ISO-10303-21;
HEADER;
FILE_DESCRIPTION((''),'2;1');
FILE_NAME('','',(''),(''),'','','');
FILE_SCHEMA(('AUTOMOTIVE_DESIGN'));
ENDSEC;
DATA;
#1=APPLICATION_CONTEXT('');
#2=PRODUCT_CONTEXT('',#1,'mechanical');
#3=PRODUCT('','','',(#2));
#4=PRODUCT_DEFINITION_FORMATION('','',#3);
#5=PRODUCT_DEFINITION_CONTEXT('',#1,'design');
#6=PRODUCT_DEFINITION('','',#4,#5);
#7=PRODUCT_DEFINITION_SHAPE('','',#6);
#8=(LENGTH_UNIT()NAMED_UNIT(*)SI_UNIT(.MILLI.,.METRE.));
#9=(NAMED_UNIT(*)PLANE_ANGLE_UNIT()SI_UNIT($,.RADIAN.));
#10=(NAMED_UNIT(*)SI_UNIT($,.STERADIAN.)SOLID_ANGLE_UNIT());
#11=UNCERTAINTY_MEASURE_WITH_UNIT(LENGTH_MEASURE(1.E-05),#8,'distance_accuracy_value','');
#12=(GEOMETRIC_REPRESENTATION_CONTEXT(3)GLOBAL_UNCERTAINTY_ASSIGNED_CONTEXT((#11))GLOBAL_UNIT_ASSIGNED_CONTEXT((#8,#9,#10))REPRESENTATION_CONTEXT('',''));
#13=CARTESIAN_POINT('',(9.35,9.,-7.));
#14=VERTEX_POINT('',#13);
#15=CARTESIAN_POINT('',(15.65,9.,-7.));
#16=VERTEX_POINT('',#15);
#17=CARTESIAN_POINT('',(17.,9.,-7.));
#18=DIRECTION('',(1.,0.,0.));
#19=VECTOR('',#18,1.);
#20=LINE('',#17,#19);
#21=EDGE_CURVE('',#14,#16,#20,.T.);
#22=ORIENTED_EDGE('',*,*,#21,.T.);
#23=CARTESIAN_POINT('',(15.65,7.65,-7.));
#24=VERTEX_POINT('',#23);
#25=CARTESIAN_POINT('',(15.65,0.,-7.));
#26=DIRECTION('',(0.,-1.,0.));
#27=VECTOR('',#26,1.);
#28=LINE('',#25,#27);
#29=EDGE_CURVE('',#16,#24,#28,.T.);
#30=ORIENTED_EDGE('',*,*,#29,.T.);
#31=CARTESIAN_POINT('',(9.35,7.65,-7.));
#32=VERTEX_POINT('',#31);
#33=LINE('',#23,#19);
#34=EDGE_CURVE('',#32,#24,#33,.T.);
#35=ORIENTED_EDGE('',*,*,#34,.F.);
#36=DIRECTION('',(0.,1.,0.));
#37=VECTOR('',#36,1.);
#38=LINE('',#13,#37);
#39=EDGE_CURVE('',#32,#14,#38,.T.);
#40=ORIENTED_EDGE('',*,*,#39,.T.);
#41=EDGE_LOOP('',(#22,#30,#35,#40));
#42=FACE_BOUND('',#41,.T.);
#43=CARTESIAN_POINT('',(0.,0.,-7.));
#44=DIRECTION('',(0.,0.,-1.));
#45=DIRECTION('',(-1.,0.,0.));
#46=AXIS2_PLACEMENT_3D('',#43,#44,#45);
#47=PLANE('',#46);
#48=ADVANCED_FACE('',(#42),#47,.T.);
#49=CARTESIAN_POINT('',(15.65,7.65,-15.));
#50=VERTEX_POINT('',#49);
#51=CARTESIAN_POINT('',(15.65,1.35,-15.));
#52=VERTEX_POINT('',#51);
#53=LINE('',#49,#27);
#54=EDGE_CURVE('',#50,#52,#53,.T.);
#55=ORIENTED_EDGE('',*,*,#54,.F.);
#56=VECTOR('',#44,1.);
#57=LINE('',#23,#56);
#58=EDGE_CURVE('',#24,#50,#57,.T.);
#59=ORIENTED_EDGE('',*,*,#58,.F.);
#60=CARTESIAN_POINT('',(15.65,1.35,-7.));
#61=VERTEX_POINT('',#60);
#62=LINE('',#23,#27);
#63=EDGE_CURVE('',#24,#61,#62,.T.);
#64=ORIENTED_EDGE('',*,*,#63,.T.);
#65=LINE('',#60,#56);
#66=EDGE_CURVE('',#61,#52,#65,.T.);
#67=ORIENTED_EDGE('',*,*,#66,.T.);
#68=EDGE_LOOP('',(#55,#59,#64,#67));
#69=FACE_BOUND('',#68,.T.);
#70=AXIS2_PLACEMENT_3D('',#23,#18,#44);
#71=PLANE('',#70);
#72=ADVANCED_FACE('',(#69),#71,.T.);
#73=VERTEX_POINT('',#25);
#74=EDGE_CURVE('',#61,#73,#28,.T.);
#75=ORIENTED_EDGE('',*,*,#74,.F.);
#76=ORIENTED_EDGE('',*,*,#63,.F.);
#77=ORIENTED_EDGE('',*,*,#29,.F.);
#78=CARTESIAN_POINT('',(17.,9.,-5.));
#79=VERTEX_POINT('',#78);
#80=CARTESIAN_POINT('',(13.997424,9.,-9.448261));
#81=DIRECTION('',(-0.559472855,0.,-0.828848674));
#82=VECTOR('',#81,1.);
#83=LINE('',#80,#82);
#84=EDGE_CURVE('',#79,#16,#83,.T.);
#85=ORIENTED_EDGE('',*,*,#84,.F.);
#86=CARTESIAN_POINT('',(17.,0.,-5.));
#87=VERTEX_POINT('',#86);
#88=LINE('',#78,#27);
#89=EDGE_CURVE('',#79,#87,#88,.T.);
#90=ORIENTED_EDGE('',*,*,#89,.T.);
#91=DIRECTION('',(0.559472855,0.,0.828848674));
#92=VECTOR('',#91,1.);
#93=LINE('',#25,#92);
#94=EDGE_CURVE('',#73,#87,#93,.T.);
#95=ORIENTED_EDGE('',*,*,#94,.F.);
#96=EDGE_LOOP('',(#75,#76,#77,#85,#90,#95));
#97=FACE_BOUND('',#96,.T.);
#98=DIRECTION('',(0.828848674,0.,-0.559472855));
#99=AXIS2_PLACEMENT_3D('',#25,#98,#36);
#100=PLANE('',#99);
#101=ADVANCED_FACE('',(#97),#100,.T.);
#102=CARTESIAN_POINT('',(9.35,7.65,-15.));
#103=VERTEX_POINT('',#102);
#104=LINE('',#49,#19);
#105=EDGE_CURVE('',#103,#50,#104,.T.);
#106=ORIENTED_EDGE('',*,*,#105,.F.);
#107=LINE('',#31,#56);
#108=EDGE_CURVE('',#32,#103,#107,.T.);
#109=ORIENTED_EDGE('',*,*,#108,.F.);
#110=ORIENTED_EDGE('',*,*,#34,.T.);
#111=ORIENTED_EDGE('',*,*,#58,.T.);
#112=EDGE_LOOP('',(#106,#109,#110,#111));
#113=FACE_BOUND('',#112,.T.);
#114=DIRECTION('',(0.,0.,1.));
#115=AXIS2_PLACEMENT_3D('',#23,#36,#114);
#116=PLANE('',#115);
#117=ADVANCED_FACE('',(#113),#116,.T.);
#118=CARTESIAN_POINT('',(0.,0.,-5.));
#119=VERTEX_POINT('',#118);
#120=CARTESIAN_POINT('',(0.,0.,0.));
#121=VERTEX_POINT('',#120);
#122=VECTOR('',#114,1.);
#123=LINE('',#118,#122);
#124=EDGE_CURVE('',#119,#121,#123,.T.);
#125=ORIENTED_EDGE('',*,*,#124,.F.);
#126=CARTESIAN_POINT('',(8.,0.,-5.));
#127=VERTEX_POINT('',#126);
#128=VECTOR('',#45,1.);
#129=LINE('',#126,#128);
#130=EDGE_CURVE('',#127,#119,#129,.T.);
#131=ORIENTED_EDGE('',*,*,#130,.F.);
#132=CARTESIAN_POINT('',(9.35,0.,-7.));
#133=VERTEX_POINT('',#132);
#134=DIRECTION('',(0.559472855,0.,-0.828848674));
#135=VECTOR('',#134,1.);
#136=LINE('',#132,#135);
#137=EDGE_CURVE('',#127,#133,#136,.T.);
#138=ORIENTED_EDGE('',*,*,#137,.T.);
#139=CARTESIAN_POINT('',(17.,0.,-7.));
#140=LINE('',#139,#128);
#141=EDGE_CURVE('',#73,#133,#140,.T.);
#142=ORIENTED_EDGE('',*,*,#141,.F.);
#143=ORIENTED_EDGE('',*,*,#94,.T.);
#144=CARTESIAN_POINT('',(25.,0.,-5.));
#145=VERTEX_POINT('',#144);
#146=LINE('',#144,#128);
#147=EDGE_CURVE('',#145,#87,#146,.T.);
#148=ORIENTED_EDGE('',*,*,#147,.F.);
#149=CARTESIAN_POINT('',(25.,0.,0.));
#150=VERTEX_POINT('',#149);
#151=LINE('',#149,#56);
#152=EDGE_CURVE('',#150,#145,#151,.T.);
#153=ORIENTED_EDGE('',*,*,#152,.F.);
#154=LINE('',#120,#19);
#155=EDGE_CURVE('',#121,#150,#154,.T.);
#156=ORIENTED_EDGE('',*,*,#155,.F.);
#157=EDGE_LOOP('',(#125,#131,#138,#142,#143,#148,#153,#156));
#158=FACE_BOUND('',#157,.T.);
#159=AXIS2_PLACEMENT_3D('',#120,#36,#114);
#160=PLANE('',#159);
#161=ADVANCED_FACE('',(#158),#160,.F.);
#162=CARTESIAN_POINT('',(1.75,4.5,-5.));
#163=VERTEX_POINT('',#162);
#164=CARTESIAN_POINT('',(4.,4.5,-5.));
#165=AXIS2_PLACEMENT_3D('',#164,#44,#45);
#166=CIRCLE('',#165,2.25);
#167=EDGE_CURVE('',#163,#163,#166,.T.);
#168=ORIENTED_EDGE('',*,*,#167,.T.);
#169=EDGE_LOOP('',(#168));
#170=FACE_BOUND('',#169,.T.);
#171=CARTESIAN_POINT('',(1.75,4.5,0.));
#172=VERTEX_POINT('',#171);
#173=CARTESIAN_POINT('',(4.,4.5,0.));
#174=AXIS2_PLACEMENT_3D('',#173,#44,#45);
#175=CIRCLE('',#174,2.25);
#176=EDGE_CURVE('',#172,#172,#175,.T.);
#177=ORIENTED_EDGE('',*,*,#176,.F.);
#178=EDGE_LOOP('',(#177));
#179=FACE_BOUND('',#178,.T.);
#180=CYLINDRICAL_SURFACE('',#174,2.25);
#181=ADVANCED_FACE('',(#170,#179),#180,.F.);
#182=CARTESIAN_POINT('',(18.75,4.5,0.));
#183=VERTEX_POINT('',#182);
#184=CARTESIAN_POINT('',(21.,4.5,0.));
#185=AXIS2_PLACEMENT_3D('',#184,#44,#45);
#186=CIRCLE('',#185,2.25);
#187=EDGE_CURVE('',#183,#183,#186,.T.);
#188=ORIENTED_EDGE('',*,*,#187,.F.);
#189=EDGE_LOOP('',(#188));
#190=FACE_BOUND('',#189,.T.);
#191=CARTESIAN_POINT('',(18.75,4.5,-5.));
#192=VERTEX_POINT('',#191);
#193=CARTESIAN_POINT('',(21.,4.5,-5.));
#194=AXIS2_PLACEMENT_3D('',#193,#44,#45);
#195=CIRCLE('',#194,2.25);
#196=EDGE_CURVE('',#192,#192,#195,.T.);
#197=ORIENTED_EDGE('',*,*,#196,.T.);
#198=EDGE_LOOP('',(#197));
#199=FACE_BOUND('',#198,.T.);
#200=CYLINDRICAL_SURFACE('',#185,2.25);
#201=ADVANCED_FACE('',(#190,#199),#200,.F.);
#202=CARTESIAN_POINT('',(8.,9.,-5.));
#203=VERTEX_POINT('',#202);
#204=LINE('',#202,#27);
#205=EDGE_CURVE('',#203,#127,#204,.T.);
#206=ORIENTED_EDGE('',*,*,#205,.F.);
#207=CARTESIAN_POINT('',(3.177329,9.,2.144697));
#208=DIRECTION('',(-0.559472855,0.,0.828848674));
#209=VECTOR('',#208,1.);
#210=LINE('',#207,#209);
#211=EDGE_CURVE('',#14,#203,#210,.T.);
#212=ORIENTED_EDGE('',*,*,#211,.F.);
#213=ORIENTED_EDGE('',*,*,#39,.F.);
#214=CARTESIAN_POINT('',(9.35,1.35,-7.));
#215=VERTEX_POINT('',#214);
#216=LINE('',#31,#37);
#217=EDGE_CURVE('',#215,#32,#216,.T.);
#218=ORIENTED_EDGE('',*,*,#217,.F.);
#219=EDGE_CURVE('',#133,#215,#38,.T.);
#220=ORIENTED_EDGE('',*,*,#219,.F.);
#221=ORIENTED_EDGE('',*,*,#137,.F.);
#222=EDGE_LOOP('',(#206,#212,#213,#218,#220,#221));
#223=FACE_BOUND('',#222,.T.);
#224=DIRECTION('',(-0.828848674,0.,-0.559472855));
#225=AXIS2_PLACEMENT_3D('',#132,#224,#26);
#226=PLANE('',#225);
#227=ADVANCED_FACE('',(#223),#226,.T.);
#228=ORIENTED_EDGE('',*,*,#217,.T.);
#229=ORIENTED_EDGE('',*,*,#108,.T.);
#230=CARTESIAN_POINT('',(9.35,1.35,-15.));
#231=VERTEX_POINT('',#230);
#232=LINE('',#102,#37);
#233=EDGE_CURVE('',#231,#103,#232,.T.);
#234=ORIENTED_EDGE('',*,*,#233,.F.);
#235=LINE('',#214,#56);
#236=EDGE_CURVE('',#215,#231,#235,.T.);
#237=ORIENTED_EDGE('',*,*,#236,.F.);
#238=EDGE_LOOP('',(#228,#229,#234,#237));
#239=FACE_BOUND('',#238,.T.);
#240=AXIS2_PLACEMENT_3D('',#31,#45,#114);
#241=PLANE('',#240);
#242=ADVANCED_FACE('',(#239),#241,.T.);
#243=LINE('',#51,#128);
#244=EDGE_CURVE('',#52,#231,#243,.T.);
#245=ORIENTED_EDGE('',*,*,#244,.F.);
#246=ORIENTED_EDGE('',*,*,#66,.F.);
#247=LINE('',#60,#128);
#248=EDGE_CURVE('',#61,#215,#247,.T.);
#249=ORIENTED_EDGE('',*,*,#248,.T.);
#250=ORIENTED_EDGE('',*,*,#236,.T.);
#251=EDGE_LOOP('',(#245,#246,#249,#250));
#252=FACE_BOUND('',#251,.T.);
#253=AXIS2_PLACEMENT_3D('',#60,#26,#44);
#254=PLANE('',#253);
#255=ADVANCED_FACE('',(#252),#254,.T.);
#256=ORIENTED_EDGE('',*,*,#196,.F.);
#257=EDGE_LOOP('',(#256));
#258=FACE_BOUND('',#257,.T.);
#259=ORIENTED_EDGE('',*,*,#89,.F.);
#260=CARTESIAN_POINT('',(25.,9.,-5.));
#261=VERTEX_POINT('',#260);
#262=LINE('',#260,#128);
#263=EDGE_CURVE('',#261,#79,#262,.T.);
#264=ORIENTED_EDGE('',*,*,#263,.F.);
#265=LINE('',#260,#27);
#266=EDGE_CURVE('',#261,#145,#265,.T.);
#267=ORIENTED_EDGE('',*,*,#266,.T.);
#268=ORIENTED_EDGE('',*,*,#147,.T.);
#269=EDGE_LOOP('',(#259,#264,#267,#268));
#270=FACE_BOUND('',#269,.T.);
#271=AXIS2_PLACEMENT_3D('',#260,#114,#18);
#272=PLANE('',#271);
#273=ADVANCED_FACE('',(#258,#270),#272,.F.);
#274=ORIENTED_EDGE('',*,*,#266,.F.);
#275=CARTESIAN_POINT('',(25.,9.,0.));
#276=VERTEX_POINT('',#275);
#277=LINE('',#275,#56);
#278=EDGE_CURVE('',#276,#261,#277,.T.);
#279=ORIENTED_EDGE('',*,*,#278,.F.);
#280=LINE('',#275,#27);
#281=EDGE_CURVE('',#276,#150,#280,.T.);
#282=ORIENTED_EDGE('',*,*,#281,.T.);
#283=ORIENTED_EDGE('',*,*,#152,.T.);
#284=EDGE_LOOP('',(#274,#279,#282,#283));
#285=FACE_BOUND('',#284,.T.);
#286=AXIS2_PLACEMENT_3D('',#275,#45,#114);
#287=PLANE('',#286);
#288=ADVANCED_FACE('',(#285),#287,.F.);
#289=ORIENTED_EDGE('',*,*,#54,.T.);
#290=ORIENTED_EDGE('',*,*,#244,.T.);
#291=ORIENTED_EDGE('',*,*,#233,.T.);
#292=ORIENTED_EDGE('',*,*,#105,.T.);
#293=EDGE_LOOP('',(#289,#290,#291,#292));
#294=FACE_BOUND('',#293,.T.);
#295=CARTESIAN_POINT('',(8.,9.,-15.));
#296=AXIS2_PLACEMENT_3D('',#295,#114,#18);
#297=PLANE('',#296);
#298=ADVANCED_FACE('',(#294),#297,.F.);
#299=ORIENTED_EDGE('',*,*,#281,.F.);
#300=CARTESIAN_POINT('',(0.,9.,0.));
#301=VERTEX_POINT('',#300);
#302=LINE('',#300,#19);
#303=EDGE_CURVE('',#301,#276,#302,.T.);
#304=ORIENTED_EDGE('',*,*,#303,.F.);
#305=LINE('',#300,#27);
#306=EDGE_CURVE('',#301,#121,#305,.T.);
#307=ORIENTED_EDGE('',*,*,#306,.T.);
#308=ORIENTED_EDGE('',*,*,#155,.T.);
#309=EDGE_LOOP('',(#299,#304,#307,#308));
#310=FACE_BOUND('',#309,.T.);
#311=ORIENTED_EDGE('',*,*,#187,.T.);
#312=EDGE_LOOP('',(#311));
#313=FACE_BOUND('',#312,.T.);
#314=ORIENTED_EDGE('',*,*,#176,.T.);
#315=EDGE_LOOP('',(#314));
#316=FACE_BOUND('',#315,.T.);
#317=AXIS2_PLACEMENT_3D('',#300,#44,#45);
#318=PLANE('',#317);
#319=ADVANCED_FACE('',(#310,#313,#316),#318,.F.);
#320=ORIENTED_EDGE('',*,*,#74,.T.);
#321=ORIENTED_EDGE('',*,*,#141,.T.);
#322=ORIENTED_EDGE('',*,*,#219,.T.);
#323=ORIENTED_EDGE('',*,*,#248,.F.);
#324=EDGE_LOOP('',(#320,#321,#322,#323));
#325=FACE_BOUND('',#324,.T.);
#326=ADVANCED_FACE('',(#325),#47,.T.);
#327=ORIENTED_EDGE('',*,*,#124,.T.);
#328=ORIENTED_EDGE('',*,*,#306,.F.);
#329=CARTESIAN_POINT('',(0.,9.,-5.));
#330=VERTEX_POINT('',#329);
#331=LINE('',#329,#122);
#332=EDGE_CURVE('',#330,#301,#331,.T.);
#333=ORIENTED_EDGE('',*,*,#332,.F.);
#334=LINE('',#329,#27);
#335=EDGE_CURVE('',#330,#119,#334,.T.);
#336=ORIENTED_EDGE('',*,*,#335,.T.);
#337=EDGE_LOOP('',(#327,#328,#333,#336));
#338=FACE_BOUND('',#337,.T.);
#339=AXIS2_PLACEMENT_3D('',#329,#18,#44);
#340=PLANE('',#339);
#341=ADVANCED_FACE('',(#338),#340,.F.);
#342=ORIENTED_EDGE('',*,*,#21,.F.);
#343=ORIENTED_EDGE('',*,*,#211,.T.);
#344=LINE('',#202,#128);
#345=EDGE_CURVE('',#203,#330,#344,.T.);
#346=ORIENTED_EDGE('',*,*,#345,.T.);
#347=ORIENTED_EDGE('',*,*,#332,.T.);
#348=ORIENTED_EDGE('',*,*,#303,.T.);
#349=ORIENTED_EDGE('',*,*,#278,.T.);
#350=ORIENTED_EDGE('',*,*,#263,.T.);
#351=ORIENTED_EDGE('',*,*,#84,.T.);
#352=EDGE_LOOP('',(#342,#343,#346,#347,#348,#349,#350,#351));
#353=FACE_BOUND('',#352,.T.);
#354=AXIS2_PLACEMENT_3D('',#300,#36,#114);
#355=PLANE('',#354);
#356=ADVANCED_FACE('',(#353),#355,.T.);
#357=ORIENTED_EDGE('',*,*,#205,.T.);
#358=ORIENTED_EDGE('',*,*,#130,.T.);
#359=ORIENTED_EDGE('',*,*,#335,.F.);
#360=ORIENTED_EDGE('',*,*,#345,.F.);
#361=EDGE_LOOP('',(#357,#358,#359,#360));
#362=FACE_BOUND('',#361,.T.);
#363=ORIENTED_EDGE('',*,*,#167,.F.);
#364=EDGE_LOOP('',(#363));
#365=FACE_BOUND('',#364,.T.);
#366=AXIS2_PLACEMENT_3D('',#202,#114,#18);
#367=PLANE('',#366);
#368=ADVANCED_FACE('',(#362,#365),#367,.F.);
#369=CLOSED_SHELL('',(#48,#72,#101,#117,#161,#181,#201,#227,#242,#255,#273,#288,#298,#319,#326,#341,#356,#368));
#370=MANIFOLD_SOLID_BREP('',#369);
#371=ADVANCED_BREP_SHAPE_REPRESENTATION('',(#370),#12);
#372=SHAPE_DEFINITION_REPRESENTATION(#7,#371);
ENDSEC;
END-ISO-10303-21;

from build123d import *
from OCP.BRepFilletAPI import BRepFilletAPI_MakeChamfer

# Parameters (mm, degrees)
RESSALTO_EXTRUS_O1_DEPTH = 9
ESBO_O2_W                = 9
ESBO_O2_H                = 9
ESBO_O2_W_2              = 6.3
ESBO_O2_H_2              = 6.3
CORTE_EXTRUS_O1_DEPTH    = 8
ESBO_O3_R                = 2.25
CORTE_EXTRUS_O2_DEPTH    = 29.390139133
CHANFRO2_SIZE            = 2
CHANFRO2_SIZE_2          = 1.35


with BuildPart() as part:
    # Esboço1 → Ressalto-extrusão1 (new body)
    with BuildSketch(Plane(origin=(0, 0, 0), x_dir=(1, 0, 0), z_dir=(0, 1, 0))):
        Polygon((0, 0), (25, 0), (25, 5), (17, 5), (17, 15), (8, 15), (8, 5), (0, 5), align=None)
    extrude(amount=RESSALTO_EXTRUS_O1_DEPTH)

    # Esboço2 → Corte-extrusão1 (cut)
    with BuildSketch(Plane(origin=(0, 0, -15), x_dir=(-1, 0, 0), z_dir=(0, 0, -1))):
        with Locations((-12.5, 4.5)):
            Rectangle(ESBO_O2_W, ESBO_O2_H)
        with Locations((-12.5, 4.5)):
            Rectangle(ESBO_O2_W_2, ESBO_O2_H_2, mode=Mode.SUBTRACT)
    extrude(amount=-CORTE_EXTRUS_O1_DEPTH, mode=Mode.SUBTRACT)

    # Esboço3 → Corte-extrusão2 (cut, through all)
    with BuildSketch(Plane(origin=(0, 0, -5), x_dir=(-1, 0, 0), z_dir=(0, 0, -1))):
        with Locations((-4, 4.5)):
            Circle(ESBO_O3_R)
        with Locations((-21, 4.5)):
            Circle(ESBO_O3_R)
    extrude(amount=-CORTE_EXTRUS_O2_DEPTH, mode=Mode.SUBTRACT)

    # Chanfro2
    chanfro2_edges_1 = [part.edges().sort_by_distance(p)[0] for p in [
        (8, 4.5, -7),
    ]]
    chanfro2_side_1 = [part.faces().sort_by_distance(p)[0] for p in [
        (8, 4.5, -6.973),
    ]]
    chanfro2_edges_2 = [part.edges().sort_by_distance(p)[0] for p in [
        (17, 4.5, -7),
    ]]
    chanfro2_side_2 = [part.faces().sort_by_distance(p)[0] for p in [
        (16.973, 4.5, -7),
    ]]
    chanfro2 = BRepFilletAPI_MakeChamfer(part.part.solid().wrapped)
    for e in chanfro2_edges_1:
        chanfro2.Add(CHANFRO2_SIZE - 0.0001, CHANFRO2_SIZE_2 - 0.0001, e.wrapped, chanfro2_side_1[0].wrapped)
    for e in chanfro2_edges_2:
        chanfro2.Add(CHANFRO2_SIZE_2 - 0.0001, CHANFRO2_SIZE - 0.0001, e.wrapped, chanfro2_side_2[0].wrapped)
    add(Compound.cast(chanfro2.Shape()), mode=Mode.REPLACE)  # a hair under: the kernel refuses the full size


solid = part.part
